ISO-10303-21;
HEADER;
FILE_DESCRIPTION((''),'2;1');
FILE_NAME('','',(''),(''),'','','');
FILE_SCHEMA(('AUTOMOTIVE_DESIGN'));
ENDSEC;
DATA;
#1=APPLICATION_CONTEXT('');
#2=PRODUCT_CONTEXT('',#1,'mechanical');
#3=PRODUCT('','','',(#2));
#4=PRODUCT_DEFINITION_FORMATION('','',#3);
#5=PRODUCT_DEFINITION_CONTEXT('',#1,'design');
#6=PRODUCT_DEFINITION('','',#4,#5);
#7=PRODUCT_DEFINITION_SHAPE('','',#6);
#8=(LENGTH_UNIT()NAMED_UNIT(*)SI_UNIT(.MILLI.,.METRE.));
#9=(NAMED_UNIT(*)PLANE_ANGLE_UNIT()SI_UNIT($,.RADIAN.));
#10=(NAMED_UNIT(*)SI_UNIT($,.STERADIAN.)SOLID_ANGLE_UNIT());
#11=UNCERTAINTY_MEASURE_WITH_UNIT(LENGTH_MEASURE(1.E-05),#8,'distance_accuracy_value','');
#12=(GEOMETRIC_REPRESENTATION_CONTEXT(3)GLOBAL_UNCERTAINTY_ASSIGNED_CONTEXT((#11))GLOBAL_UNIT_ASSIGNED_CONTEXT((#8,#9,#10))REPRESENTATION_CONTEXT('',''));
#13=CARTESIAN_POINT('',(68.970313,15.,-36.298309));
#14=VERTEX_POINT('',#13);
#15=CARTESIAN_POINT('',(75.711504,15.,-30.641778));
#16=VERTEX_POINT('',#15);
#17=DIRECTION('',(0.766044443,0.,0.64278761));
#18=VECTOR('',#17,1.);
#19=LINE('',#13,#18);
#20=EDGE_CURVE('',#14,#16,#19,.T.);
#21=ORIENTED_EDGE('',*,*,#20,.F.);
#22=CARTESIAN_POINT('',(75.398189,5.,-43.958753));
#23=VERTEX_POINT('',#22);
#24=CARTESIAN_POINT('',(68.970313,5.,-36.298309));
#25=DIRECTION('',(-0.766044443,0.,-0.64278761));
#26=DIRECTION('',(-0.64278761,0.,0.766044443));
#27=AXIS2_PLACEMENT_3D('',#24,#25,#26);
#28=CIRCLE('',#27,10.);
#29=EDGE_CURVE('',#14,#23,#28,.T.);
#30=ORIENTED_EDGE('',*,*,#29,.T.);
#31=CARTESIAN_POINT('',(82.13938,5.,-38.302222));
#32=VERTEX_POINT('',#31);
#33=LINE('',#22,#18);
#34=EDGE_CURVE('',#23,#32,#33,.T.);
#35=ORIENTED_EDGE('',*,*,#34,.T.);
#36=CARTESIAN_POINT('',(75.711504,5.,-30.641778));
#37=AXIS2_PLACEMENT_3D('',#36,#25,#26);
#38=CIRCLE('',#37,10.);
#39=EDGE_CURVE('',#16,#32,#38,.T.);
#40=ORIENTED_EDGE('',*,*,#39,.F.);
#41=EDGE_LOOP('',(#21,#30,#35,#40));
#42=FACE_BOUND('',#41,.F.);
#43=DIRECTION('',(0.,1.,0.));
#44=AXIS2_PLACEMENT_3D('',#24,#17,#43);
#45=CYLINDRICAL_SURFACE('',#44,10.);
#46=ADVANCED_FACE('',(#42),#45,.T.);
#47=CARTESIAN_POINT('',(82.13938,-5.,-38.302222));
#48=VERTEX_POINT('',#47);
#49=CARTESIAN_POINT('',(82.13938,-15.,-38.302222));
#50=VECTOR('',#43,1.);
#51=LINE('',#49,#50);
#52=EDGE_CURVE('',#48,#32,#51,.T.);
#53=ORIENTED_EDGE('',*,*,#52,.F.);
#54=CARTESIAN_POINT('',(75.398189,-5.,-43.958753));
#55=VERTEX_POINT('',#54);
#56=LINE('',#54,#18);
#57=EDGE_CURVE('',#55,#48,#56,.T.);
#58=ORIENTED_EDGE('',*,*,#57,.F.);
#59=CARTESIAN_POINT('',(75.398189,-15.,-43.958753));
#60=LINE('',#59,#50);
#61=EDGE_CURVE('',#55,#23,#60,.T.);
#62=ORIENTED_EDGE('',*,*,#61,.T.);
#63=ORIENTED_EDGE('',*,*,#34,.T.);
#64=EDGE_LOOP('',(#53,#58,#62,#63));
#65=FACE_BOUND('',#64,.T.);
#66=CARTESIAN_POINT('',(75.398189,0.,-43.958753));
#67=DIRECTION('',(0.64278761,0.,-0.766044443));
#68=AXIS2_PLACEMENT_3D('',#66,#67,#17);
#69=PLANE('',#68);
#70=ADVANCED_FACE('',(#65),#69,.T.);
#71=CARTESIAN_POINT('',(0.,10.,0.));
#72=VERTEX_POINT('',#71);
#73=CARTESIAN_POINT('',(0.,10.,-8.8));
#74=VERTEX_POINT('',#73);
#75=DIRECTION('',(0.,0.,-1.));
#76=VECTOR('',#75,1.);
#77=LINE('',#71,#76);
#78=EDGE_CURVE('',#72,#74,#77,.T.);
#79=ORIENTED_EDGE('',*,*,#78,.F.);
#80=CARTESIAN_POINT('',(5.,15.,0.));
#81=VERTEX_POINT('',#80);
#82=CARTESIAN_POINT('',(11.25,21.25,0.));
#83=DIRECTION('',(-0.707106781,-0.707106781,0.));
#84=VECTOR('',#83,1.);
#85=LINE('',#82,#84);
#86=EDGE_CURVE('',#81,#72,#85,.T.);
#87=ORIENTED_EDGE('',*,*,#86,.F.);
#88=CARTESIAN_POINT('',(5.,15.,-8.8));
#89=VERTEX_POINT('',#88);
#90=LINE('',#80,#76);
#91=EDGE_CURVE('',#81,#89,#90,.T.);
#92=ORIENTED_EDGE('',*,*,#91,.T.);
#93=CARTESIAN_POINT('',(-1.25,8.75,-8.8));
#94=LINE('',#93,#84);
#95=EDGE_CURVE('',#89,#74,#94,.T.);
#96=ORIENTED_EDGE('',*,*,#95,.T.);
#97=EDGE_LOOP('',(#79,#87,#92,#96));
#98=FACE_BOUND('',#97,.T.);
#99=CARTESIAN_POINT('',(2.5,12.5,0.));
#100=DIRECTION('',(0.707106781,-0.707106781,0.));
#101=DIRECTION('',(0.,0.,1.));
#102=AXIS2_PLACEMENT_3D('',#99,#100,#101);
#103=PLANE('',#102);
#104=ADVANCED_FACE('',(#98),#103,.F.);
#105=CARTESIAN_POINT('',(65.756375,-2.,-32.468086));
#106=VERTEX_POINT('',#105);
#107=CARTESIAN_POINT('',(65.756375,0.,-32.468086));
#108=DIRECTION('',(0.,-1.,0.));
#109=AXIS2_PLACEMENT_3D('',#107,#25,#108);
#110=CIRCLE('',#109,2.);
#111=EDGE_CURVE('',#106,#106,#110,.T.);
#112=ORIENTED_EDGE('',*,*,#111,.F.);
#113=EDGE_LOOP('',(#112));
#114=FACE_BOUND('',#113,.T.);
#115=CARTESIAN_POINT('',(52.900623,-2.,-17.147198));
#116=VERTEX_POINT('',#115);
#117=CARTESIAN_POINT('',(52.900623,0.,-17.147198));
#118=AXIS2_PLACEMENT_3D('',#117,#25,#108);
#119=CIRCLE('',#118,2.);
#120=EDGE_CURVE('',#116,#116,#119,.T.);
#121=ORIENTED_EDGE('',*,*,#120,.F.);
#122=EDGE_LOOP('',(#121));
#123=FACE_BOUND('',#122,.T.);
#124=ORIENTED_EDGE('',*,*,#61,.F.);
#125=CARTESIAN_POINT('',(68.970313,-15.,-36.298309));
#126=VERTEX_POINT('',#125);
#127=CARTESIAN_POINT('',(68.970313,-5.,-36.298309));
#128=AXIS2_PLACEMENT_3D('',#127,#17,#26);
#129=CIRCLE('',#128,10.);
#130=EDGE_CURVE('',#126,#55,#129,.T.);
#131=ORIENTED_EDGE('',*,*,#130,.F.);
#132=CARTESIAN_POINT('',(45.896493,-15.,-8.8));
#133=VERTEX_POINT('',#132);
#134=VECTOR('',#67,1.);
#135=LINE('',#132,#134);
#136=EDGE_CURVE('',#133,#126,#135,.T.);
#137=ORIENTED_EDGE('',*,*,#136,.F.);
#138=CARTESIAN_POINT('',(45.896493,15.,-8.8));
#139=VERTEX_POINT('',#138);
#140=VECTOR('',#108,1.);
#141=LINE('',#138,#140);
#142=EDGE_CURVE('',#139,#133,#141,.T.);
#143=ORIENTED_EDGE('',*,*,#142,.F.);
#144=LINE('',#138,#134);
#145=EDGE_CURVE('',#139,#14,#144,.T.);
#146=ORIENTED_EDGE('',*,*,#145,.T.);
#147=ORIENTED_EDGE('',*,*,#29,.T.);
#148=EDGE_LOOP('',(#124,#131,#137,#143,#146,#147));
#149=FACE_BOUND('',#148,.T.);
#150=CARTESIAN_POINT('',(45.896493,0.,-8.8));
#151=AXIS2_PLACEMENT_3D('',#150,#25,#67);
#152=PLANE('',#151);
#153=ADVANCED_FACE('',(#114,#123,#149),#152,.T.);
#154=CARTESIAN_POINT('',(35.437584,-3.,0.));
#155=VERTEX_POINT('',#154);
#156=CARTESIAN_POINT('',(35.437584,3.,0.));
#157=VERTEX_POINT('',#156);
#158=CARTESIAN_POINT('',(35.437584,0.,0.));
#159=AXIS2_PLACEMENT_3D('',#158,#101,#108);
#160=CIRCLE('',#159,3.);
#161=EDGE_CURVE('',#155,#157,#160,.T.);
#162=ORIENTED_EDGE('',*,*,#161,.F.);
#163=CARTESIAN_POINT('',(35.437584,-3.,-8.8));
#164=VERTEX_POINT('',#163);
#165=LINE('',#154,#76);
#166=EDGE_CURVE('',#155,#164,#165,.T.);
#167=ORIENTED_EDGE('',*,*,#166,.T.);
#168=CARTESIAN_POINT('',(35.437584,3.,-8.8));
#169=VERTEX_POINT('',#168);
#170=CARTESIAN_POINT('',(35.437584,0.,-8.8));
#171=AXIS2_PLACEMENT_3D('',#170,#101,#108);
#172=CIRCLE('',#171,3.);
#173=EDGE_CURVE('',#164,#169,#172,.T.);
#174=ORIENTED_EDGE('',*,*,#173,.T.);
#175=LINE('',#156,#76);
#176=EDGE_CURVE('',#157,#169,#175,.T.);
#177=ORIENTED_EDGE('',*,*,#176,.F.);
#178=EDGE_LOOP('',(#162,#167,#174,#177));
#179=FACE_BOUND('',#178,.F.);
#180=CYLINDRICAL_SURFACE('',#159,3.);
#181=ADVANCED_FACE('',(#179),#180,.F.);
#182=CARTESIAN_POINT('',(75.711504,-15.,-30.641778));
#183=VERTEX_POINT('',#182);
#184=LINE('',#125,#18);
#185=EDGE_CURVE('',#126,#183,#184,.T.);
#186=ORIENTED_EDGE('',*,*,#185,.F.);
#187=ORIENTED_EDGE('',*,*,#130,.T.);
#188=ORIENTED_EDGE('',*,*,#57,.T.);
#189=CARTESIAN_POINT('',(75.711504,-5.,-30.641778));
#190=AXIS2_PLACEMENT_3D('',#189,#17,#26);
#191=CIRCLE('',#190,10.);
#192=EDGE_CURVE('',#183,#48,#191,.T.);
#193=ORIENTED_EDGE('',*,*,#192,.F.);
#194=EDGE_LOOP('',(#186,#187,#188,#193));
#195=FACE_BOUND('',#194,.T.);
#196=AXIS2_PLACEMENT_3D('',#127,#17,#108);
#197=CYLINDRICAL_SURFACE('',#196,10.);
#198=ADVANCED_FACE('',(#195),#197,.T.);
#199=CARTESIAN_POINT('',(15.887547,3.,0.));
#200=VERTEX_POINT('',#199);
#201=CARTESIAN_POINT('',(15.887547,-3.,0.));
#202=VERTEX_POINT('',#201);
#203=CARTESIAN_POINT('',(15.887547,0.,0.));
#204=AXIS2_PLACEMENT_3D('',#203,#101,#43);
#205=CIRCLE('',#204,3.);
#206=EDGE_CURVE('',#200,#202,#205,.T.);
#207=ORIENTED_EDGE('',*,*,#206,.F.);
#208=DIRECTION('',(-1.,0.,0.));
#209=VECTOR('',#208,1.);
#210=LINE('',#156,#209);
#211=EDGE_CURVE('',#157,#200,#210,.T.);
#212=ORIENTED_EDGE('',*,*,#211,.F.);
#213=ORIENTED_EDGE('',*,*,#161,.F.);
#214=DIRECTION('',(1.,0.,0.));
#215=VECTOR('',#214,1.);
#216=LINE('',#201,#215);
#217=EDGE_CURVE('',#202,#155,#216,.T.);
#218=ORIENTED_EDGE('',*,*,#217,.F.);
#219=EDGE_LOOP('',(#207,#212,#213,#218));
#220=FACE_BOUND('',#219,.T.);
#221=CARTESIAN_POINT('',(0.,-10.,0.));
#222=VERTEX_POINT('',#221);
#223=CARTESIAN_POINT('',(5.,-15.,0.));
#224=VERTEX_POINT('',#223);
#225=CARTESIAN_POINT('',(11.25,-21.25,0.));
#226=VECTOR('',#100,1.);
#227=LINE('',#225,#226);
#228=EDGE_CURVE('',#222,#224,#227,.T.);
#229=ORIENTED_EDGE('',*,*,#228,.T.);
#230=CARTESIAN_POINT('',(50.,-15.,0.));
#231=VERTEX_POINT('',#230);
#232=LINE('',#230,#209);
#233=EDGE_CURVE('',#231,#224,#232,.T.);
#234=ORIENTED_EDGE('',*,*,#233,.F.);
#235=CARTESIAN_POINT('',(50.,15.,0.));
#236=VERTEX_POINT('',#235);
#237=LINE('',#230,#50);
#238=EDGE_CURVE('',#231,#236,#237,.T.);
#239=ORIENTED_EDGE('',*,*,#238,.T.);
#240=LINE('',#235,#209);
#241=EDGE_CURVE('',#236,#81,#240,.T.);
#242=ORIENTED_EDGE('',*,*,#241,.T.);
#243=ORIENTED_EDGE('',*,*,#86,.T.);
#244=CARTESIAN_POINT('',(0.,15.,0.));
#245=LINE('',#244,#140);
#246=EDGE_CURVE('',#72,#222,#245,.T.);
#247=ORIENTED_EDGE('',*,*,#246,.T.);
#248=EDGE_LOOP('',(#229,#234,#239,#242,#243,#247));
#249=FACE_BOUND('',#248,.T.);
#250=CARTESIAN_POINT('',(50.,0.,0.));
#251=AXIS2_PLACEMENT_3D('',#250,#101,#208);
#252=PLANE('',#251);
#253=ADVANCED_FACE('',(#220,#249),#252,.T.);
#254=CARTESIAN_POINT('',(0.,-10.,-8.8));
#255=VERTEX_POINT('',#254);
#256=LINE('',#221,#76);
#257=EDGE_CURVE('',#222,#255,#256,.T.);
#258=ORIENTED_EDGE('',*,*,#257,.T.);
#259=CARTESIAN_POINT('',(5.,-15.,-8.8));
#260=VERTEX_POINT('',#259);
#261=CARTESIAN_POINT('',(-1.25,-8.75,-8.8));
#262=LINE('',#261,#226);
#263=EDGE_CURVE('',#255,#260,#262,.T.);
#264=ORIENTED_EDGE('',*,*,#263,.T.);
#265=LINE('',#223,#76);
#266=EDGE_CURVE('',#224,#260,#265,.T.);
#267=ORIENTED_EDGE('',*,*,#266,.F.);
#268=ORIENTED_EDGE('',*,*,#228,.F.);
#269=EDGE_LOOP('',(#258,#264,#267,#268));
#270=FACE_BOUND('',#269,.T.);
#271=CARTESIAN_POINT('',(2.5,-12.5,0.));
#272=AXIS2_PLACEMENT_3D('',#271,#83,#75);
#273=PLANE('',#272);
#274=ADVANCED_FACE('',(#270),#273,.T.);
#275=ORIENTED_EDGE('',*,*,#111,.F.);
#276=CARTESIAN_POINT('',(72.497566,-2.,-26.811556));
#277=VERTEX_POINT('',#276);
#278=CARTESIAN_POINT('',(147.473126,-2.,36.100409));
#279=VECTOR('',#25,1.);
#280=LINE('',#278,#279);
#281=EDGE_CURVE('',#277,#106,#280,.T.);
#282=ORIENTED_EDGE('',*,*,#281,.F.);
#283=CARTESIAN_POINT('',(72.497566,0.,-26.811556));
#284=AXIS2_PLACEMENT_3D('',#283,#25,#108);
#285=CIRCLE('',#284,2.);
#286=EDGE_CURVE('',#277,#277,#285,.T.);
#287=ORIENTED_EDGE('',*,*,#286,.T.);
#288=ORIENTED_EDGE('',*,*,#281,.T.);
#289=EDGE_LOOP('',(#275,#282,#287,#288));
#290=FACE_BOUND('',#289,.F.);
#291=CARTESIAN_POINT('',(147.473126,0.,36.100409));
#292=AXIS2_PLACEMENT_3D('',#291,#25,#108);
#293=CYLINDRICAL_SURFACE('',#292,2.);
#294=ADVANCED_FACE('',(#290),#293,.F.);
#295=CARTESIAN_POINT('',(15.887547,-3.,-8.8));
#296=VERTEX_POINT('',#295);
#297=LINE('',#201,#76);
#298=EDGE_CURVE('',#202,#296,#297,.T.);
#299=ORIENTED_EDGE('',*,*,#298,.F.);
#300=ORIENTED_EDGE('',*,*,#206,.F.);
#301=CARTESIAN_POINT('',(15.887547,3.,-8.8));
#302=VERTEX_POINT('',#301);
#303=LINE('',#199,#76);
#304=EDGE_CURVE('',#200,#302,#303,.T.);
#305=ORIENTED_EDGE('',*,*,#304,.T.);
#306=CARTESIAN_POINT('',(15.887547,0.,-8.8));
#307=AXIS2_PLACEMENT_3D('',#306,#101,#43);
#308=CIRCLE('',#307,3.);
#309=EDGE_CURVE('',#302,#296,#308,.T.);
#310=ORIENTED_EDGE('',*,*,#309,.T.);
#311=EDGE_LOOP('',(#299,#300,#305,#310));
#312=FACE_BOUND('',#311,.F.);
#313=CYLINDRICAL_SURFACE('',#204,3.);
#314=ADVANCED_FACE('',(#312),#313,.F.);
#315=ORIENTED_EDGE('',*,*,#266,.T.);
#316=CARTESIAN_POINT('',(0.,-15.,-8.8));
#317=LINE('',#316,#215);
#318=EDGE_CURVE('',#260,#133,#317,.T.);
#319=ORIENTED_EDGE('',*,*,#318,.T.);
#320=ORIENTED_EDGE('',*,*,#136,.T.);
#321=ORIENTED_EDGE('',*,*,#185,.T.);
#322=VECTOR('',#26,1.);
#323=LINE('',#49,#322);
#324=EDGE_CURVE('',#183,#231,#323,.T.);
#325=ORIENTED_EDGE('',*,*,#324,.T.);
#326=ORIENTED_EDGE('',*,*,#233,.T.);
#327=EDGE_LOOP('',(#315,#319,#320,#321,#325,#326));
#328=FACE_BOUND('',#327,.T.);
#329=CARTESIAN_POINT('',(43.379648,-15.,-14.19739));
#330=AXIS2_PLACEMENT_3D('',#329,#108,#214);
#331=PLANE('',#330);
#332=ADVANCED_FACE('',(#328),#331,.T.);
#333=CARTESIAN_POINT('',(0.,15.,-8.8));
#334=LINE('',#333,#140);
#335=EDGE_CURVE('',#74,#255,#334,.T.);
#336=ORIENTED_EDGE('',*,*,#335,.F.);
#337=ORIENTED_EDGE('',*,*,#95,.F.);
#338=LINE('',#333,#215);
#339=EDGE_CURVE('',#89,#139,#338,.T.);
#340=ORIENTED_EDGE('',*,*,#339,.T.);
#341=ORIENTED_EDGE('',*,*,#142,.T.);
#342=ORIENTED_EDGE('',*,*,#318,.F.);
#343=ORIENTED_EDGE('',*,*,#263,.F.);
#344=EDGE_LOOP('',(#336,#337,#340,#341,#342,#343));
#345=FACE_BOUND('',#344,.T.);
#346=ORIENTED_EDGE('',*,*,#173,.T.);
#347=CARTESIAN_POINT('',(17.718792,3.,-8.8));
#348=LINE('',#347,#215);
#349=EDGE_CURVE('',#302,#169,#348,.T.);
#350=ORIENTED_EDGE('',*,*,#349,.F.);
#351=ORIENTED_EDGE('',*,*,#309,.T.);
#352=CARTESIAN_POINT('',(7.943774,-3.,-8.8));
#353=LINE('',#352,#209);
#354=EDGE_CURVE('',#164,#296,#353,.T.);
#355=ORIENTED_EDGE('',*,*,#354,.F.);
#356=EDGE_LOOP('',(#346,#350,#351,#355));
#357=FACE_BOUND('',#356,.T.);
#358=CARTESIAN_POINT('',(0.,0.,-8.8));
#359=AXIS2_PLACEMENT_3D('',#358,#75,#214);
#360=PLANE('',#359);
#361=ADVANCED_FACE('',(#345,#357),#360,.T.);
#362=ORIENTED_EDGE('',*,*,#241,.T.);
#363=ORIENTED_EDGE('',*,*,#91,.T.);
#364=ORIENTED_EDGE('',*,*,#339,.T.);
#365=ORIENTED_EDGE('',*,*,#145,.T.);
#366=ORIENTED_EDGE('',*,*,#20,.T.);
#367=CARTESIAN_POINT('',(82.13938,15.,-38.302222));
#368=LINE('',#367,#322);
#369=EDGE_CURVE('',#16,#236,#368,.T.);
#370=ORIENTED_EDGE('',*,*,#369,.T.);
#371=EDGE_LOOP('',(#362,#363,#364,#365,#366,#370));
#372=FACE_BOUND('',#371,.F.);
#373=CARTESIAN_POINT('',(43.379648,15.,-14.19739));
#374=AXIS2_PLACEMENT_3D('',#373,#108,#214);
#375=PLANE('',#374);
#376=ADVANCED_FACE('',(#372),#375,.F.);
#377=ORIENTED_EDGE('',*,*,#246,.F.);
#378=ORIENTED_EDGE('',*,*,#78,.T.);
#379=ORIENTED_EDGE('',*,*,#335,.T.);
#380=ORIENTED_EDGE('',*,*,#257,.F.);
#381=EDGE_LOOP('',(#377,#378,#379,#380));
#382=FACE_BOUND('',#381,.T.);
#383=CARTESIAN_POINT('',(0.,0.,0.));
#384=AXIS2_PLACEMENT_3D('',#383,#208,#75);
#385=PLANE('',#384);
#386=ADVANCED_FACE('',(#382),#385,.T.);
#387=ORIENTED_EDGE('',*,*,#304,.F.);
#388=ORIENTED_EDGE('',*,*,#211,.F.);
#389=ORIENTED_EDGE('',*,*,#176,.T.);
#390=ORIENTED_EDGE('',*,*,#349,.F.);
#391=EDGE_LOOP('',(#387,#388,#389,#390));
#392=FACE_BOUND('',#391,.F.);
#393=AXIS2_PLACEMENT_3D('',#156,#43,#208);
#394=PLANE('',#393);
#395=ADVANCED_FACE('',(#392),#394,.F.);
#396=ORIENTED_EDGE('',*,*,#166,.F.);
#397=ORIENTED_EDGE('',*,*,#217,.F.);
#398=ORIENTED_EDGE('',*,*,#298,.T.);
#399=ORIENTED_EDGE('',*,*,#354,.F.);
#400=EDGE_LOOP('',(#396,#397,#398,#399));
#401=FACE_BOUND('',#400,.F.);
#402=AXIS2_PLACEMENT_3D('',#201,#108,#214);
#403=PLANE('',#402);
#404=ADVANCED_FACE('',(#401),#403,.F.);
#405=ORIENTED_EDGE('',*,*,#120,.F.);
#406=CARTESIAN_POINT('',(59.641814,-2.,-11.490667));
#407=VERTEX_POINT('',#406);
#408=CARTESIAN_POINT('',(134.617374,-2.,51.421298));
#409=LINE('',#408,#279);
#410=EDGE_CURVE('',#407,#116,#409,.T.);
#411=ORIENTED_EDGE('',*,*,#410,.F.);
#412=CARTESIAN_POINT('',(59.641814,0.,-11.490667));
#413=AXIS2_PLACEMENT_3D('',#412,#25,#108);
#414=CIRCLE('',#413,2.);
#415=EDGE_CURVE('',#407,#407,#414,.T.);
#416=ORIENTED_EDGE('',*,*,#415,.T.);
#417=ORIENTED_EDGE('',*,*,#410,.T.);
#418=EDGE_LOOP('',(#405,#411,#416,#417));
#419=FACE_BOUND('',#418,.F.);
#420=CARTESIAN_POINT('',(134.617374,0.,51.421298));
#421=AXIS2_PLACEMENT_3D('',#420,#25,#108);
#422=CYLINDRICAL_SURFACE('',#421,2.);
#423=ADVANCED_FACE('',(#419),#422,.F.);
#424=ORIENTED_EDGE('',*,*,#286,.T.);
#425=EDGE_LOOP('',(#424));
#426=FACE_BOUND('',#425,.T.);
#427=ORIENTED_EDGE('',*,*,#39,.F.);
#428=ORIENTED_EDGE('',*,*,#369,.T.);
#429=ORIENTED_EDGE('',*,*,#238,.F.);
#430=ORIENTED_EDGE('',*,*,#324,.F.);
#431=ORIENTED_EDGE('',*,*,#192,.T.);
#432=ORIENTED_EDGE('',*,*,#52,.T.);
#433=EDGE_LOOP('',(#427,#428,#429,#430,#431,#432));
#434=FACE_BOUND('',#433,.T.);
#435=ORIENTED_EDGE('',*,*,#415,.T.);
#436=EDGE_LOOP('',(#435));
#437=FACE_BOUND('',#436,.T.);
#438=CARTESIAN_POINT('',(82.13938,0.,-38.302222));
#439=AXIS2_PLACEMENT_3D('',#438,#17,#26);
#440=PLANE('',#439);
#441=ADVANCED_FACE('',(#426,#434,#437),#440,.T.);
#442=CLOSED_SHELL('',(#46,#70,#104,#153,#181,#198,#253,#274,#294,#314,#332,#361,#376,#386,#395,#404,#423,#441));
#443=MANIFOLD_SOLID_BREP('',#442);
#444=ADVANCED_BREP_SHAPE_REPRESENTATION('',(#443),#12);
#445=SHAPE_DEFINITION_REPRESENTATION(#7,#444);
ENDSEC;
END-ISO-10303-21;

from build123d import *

# Parameters (mm, degrees)
F1_DEPTH = 15
F3_DEPTH = 43.9597531212
F5_D     = 4
F6_R     = 10
F7_SIZE  = 5


with BuildPart() as f1:
    # F0 (on Front) → F1 (new body, symmetric)
    with BuildSketch(Plane.XZ):
        Polygon((50, 0), (0, 0), (0, -8.8), (45.8964926082, -8.8), (75.3981893849, -43.9587531212), (82.1393804843, -38.3022221559), align=None)
    extrude(amount=F1_DEPTH, both=True)

    # F2 (on face) → F3 (cut, through all)
    with BuildSketch(Plane.XY):
        with BuildLine():
            ThreePointArc((15.8875472844, 3), (12.8875472844, 0), (15.8875472844, -3))
            Line((15.8875472844, -3), (35.4375839233, -3))
            ThreePointArc((35.4375839233, -3), (38.4375839233, 0), (35.4375839233, 3))
            Line((35.4375839233, 3), (15.8875472844, 3))
        make_face()
    extrude(amount=-F3_DEPTH, mode=Mode.SUBTRACT)

    # F5 (through all)
    with Locations(Plane(origin=(29.3412044417, 0, 24.6201938253), x_dir=(0, 1, 0), z_dir=(0.7660444431, 0, 0.6427876097))):
        with Locations((0, -47.1393804843), (0, -67.1393804843)):
            Hole(F5_D / 2)

    # F6
    f6_edges = [f1.edges().sort_by_distance(p)[0] for p in [
        (78.768785, -15, -41.130488),
        (78.768785, 15, -41.130488),
    ]]
    fillet(f6_edges, radius=F6_R)

    # F7
    f7_edges = [f1.edges().sort_by_distance(p)[0] for p in [
        (0, -15, -4.4),
        (0, 15, -4.4),
    ]]
    chamfer(f7_edges, length=F7_SIZE)


solid = f1.part
